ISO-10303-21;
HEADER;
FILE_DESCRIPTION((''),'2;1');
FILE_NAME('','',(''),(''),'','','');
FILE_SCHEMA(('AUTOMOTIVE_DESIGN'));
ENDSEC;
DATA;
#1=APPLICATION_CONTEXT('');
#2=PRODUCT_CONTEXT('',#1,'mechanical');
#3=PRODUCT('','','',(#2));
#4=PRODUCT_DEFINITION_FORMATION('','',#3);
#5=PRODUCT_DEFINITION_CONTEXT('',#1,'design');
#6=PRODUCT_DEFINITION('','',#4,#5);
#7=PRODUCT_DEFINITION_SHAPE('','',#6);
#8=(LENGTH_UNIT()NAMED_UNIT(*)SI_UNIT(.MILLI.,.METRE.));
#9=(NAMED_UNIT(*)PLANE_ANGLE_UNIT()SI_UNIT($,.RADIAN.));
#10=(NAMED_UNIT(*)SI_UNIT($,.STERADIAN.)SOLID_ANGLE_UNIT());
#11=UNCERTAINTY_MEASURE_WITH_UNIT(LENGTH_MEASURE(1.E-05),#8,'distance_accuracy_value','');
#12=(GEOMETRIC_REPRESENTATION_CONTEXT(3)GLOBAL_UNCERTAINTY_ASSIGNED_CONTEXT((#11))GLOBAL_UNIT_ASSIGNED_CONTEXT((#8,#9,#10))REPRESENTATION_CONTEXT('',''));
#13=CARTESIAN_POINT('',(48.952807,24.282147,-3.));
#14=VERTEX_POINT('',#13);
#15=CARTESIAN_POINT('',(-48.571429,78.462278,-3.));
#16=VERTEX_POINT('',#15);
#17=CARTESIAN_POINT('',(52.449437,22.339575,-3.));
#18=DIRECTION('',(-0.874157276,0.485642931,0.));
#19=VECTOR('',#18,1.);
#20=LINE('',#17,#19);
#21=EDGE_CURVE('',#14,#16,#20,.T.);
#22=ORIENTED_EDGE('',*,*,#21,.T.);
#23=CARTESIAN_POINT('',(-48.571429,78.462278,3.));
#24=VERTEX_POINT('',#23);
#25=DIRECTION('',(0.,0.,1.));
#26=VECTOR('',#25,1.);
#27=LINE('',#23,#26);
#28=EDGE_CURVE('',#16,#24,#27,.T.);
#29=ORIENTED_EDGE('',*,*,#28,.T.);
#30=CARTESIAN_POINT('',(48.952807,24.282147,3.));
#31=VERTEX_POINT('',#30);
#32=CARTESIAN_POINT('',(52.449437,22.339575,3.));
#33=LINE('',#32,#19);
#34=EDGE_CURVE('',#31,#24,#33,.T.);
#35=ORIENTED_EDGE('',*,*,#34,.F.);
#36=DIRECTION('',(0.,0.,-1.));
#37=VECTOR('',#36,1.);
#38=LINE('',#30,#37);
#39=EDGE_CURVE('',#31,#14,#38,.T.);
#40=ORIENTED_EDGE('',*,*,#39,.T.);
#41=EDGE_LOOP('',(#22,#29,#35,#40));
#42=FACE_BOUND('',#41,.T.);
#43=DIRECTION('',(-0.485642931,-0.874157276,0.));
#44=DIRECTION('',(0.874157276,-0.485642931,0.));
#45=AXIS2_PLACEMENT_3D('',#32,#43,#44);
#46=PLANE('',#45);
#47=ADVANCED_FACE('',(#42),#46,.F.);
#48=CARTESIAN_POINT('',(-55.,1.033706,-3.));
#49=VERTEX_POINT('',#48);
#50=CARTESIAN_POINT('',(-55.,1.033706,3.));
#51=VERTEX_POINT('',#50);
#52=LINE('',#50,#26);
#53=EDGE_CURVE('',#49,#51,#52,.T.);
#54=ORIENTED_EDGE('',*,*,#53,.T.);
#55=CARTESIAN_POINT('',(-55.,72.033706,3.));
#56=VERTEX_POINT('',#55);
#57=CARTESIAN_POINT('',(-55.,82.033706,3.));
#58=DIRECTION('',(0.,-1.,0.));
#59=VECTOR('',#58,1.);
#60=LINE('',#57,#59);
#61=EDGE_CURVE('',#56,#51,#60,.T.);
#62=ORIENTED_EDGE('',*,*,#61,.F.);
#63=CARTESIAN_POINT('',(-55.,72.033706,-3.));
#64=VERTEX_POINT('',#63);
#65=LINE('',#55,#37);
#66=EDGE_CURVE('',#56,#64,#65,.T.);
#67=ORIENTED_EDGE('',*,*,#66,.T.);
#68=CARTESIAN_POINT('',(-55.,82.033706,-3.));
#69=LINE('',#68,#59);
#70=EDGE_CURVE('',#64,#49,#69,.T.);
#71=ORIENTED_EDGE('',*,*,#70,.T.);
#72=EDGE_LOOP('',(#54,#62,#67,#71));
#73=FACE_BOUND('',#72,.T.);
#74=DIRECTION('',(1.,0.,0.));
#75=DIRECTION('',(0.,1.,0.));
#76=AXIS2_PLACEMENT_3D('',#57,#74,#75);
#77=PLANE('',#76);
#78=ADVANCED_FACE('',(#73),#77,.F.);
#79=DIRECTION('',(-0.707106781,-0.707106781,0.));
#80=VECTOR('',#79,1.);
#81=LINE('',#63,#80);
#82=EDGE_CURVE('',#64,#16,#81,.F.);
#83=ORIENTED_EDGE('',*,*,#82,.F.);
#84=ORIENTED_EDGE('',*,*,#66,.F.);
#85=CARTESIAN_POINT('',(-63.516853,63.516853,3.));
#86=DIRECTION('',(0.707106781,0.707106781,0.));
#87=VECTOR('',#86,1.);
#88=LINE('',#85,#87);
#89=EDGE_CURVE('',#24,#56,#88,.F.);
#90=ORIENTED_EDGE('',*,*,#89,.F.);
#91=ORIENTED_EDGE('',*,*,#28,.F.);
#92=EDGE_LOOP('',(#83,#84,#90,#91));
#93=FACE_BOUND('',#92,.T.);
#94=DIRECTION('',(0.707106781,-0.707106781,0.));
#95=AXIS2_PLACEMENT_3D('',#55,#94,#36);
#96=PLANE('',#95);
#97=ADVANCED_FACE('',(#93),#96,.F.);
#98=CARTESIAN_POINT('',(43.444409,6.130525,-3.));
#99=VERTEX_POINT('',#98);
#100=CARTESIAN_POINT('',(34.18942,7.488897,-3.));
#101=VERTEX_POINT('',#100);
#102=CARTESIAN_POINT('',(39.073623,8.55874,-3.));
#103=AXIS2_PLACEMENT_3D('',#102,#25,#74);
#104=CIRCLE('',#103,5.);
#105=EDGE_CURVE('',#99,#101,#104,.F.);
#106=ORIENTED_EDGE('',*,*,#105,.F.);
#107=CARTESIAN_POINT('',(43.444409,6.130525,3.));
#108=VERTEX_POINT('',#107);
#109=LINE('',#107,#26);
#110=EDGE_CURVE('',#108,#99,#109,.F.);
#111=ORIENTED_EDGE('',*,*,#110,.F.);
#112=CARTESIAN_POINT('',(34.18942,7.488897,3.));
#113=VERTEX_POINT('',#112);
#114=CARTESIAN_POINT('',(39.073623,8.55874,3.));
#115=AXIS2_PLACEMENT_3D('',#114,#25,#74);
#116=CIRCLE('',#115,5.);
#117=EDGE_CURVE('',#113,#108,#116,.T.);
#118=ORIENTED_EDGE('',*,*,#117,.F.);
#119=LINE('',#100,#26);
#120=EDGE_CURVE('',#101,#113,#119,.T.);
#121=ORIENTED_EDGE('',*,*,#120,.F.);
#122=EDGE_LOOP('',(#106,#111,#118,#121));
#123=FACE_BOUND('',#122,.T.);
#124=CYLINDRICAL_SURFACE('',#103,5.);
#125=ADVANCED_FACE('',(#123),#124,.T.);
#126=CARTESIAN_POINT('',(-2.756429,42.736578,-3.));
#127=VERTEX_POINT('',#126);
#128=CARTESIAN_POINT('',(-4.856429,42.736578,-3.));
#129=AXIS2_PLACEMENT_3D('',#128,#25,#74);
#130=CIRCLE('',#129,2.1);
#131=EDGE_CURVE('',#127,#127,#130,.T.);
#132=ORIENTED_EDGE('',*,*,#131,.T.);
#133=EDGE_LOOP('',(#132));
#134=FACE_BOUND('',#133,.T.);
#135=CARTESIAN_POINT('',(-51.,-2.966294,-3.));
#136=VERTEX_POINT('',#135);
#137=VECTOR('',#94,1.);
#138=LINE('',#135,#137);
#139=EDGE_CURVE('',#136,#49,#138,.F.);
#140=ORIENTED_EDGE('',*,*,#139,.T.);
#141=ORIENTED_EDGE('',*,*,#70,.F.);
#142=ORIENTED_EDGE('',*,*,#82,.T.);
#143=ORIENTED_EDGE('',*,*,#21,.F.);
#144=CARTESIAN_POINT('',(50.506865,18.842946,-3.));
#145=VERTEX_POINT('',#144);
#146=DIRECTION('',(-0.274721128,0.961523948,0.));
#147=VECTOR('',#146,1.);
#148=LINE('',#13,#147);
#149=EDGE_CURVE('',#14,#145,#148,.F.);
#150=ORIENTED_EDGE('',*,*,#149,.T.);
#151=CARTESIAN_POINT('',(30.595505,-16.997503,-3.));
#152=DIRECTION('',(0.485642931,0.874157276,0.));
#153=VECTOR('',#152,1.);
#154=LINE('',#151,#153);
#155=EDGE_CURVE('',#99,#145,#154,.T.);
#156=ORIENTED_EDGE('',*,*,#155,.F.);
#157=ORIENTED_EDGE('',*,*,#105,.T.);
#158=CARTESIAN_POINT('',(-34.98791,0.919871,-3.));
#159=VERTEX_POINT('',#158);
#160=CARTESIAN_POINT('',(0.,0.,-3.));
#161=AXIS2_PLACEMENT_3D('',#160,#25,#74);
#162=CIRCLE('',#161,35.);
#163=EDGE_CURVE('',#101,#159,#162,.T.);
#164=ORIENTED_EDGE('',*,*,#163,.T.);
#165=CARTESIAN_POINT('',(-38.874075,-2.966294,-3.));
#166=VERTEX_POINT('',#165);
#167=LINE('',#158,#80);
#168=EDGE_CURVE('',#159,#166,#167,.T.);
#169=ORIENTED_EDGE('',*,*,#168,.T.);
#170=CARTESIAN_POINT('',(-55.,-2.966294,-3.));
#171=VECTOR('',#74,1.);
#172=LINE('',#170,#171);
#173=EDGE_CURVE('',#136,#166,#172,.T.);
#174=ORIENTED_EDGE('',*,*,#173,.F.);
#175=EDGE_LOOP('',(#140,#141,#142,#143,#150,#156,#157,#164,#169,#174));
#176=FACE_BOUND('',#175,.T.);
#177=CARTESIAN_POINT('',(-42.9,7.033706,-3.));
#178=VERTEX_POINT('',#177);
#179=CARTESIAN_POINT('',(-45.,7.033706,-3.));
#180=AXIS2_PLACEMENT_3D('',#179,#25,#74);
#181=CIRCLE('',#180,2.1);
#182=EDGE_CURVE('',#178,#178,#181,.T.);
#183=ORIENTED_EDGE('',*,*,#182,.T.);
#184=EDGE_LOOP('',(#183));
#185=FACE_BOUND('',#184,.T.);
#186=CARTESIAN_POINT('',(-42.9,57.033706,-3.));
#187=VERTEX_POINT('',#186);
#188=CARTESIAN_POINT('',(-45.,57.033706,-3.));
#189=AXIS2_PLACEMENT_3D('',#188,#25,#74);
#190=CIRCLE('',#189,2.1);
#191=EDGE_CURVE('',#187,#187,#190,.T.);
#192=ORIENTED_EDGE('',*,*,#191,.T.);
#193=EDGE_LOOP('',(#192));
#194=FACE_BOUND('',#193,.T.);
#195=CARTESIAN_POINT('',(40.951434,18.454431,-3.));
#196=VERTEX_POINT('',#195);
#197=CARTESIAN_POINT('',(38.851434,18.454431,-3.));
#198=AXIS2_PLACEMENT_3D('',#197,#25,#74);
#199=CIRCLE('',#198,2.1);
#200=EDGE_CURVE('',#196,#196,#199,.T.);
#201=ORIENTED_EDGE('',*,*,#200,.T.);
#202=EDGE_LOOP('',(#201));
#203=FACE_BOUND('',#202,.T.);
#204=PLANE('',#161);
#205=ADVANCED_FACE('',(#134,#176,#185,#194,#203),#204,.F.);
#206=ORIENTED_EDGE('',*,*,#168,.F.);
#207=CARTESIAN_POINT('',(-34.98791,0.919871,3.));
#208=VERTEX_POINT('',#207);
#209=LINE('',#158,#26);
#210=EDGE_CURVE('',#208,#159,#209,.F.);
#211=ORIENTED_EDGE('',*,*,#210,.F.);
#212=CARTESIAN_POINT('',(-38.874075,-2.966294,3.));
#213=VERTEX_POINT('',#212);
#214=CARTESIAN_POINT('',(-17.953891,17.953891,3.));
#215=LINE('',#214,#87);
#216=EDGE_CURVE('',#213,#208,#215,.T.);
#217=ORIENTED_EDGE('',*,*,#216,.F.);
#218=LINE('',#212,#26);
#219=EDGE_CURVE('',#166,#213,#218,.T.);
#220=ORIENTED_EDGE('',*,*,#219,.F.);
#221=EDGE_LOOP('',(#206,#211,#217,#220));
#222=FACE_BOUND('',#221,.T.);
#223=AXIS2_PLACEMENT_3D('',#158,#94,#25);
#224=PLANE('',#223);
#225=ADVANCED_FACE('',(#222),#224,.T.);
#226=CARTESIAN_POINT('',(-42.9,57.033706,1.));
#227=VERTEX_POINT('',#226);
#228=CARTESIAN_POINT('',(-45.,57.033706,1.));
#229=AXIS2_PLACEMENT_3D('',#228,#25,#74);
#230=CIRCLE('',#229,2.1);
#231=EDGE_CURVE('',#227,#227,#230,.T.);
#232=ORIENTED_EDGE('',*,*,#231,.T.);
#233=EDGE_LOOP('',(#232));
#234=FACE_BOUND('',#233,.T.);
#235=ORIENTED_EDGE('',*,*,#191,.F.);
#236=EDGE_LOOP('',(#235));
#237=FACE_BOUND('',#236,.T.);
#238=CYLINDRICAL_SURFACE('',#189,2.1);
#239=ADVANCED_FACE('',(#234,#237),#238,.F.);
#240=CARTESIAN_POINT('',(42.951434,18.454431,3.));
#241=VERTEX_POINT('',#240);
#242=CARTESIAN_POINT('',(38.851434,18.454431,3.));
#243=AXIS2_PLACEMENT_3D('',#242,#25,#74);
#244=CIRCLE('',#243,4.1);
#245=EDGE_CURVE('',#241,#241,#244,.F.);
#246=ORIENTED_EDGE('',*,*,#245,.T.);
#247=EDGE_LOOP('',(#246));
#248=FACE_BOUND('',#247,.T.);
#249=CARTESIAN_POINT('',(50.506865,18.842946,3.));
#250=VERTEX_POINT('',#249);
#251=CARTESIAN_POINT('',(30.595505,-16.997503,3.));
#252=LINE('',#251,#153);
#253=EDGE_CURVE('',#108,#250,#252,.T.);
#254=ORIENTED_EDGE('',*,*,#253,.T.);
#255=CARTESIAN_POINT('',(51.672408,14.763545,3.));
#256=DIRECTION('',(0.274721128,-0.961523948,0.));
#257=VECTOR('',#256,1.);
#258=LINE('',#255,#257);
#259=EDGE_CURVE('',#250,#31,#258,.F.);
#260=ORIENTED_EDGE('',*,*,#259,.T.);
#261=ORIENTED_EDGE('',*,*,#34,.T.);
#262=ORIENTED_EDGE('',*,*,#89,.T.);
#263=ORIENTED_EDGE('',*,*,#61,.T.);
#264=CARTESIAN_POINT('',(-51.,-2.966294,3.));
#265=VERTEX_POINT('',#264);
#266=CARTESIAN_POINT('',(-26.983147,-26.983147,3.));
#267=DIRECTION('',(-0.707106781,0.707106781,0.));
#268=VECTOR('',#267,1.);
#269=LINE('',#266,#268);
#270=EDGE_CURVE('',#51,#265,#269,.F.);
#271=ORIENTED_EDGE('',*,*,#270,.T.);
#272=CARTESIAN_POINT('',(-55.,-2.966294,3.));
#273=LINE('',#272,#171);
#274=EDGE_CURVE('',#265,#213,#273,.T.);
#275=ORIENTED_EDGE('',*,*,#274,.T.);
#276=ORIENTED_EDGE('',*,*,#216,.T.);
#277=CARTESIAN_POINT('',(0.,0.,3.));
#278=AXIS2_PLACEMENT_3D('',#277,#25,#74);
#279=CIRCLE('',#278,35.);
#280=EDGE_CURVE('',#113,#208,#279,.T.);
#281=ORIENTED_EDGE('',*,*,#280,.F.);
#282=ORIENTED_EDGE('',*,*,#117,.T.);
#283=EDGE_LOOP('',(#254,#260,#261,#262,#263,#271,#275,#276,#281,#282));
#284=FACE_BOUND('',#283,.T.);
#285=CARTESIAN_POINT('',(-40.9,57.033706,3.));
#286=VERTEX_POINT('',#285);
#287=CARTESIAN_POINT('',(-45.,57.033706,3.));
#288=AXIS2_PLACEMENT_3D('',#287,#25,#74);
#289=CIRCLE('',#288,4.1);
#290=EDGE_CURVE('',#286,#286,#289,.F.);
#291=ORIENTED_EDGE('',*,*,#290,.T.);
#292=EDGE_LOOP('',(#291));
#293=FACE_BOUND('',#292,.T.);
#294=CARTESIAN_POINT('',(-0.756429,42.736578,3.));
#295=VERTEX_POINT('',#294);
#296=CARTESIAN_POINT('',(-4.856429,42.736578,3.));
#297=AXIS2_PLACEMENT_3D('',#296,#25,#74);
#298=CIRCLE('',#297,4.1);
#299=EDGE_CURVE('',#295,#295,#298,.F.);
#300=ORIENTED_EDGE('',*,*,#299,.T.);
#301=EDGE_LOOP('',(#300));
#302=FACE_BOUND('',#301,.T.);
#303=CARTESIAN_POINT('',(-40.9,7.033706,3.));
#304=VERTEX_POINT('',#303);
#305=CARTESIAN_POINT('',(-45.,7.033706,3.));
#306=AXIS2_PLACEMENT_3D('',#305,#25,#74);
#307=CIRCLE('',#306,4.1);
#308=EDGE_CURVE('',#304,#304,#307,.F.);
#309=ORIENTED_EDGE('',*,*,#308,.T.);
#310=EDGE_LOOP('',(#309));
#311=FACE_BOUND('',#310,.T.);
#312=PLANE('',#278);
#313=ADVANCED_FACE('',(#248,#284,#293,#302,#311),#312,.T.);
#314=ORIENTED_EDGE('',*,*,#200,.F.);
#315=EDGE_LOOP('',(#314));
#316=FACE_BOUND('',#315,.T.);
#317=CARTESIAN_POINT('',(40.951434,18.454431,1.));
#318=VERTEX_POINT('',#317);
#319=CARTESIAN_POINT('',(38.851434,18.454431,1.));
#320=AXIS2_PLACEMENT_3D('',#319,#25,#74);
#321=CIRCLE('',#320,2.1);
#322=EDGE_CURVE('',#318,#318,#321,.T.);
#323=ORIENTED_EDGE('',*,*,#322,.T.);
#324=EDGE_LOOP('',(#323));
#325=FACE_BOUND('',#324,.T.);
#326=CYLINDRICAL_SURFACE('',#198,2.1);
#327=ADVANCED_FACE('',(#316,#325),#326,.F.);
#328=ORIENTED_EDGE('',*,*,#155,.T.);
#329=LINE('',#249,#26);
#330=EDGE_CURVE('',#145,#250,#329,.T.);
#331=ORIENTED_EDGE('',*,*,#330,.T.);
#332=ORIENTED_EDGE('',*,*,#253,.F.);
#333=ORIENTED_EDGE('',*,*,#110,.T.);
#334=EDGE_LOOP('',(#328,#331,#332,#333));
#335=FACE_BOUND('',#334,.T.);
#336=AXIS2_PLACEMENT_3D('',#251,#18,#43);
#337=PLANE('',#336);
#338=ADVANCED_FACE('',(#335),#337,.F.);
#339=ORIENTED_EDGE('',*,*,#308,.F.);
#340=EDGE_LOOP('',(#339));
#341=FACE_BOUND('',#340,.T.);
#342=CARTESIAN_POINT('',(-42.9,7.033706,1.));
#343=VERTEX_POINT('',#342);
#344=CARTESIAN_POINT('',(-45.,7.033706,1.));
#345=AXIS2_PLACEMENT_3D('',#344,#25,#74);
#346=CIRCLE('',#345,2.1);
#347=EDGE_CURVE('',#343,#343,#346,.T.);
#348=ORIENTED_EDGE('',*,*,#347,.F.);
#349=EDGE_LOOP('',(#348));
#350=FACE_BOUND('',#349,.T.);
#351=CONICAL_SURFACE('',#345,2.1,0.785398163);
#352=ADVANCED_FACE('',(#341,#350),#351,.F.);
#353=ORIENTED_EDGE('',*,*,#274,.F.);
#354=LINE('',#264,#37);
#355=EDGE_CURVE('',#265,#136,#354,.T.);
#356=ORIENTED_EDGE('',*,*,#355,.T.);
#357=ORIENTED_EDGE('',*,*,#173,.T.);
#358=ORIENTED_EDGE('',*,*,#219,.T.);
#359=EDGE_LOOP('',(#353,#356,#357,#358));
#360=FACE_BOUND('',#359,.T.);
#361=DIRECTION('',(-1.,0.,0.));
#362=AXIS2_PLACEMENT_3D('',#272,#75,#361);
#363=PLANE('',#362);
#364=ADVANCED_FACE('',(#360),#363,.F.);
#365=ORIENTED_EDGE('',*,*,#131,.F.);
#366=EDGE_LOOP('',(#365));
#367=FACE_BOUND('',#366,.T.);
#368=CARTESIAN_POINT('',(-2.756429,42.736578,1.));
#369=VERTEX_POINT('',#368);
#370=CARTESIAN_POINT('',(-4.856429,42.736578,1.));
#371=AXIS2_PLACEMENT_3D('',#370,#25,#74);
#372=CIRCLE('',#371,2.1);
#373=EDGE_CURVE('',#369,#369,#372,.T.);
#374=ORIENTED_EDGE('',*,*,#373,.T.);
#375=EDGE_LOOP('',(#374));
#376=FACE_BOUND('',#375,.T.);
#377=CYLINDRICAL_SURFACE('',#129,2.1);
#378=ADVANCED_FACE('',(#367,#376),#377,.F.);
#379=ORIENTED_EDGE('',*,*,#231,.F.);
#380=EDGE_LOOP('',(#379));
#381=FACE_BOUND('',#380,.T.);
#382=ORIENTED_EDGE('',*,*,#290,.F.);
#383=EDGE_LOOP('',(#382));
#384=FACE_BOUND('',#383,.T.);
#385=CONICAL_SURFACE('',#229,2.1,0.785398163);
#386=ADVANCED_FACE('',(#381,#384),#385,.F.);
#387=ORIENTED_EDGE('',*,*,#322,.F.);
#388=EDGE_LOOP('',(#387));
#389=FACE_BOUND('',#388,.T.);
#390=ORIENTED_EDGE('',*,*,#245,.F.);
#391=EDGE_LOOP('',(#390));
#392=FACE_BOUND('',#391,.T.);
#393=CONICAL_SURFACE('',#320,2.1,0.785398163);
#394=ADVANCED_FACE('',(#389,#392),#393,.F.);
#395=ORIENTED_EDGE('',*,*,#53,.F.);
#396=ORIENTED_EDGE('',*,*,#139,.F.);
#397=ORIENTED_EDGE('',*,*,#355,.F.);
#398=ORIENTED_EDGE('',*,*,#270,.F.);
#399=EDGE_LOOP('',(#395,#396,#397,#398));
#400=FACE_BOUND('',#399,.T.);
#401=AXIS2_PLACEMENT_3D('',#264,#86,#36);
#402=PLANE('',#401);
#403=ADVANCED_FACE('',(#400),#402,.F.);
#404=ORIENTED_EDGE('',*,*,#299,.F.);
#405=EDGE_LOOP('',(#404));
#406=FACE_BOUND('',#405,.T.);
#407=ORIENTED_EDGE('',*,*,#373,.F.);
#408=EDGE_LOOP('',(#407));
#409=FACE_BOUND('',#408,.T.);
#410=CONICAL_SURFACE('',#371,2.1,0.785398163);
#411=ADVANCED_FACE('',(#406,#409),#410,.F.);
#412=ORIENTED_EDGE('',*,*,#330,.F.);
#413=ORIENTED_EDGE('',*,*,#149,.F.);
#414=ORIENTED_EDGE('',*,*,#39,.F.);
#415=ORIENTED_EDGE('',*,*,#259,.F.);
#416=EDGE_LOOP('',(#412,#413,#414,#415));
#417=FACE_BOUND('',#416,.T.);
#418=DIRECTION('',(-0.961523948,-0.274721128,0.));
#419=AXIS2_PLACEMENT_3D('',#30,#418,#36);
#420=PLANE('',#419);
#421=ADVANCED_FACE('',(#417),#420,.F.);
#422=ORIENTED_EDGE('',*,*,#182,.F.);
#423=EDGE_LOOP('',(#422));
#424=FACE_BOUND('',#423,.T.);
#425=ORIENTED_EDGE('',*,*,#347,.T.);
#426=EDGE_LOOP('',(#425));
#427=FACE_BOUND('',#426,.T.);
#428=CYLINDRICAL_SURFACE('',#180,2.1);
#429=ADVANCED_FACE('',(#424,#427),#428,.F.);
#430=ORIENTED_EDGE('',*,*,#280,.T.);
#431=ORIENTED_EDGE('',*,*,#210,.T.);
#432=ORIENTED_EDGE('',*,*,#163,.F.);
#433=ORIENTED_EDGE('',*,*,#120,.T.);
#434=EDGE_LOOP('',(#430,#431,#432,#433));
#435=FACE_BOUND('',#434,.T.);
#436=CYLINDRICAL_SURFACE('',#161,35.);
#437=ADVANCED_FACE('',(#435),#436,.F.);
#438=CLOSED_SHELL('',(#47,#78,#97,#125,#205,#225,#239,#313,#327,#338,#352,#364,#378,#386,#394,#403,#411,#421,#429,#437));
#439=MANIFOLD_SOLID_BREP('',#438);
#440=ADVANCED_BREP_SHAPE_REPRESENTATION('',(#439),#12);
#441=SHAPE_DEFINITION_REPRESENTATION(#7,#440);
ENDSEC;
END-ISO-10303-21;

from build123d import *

# Parameters (mm, degrees)
SKETCH_1_R          = 2.1
SKETCH_1_R_2        = 4
SKETCH_1_R_3        = 11
EXTRUDE_1_DEPTH     = 3
SKETCH_3_R          = 2.1
CUT_EXTRUDE_1_DEPTH = 99.947101842
CHAMFER_2_SIZE      = 4
CHAMFER_3_SIZE      = 10
CHAMFER_3_SIZE2     = 7.354021529
SKETCH_4_W          = 7.6
SKETCH_4_H          = 9.2
CUT_EXTRUDE_2_DEPTH = 97.00692173
FILLET_1_R          = 2
SKETCH_5_R          = 2.1
CUT_EXTRUDE_3_DEPTH = 97.00692173
CHAMFER_1_SIZE      = 2
SKETCH_6_R          = 35
CUT_EXTRUDE_4_DEPTH = 97.00692173
FILLET_START        = -3
FILLET_2_DEPTH      = 6
CHAMFER_4_SIZE      = 4


with BuildPart() as part:
    # 草图1 → 凸台-拉伸1 (new, symmetric)
    with BuildSketch(Plane.XY):
        with BuildLine():
            Line((-55, 82.03370626), (-55, -2.96629374))
            Line((-55, -2.96629374), (-34.874074919, -2.96629374))
            ThreePointArc((-34.874074919, -2.96629374), (-7.334524273, -34.22286887), (30.595504664, -16.997502591))
            Line((30.595504664, -16.997502591), (52.449436567, 22.339574834))
            Line((52.449436567, 22.339574834), (-55, 82.03370626))
        make_face()
        with Locations((29, 0)):
            Circle(SKETCH_1_R, mode=Mode.SUBTRACT)
        with Locations((-14.5, -25.11473671)):
            Circle(SKETCH_1_R, mode=Mode.SUBTRACT)
        with Locations((-14.5, 25.11473671)):
            Circle(SKETCH_1_R, mode=Mode.SUBTRACT)
        with Locations((-9.625, 16.670989023)):
            Circle(SKETCH_1_R_2, mode=Mode.SUBTRACT)
        Circle(SKETCH_1_R_3, mode=Mode.SUBTRACT)
    extrude(amount=EXTRUDE_1_DEPTH, both=True)

    # 草图3 → 切除-拉伸1 (cut, through all)
    with BuildSketch(Plane.XY.offset(3)):
        with Locations((-45, 7.03370626)):
            Circle(SKETCH_3_R)
        with Locations((-45, 57.03370626)):
            Circle(SKETCH_3_R)
    extrude(amount=-CUT_EXTRUDE_1_DEPTH, mode=Mode.SUBTRACT)

    # 倒角2
    chamfer_2_edges = [part.edges().sort_by_distance(p)[0] for p in [
        (52.449436567, 22.339574834, 0),
        (-55, -2.96629374, 0),
    ]]
    chamfer(chamfer_2_edges, length=CHAMFER_2_SIZE)

    # 倒角3
    chamfer_3_edges = [part.edges().sort_by_distance(p)[0] for p in [
        (-55, 82.03370626, 0),
    ]]
    chamfer_3_side = [part.faces().sort_by_distance(p)[0] for p in [
        (-55, 41.53370626, 0),
    ]]
    chamfer(chamfer_3_edges, length=CHAMFER_3_SIZE, length2=CHAMFER_3_SIZE2, reference=chamfer_3_side[0])

    # 草图4 → 切除-拉伸2 (cut, through all)
    with BuildSketch(Plane.XY.offset(3)):
        with Locations((-18.5, 0)):
            Rectangle(SKETCH_4_W, SKETCH_4_H)
    extrude(amount=-CUT_EXTRUDE_2_DEPTH, mode=Mode.SUBTRACT)

    # 圆角1
    fillet_1_edges = [part.edges().sort_by_distance(p)[0] for p in [
        (-14.7, 4.6, 0),
        (-14.7, -4.6, 0),
        (-22.3, -4.6, 0),
        (-22.3, 4.6, 0),
    ]]
    fillet(fillet_1_edges, radius=FILLET_1_R)

    # 草图5 → 切除-拉伸3 (cut, through all)
    with BuildSketch(Plane.XY.offset(3)):
        with Locations((-4.856429312, 42.736577944)):
            Circle(SKETCH_5_R)
        with Locations((38.851434494, 18.454431385)):
            Circle(SKETCH_5_R)
    extrude(amount=-CUT_EXTRUDE_3_DEPTH, mode=Mode.SUBTRACT)

    # 倒角1
    chamfer_1_edges = [part.edges().sort_by_distance(p)[0] for p in [
        (-6.956429312, 42.736577944, 3),
        (36.751434494, 18.454431385, 3),
        (26.9, 0, 3),
        (-47.1, 7.03370626, 3),
        (-47.1, 57.03370626, 3),
    ]]
    chamfer(chamfer_1_edges, length=CHAMFER_1_SIZE)

    # 草图6 → 切除-拉伸4 (cut, through all)
    with BuildSketch(Plane.XY.offset(3)):
        Circle(SKETCH_6_R)
    extrude(amount=-CUT_EXTRUDE_4_DEPTH, mode=Mode.SUBTRACT)

    # 圆角2: read off the stored shape, not the designer's step
    # 圆角2 outline → 圆角2 (cut)
    with BuildSketch(Plane.XY.offset(FILLET_START)):
        with BuildLine():
            ThreePointArc((43.444408883, 6.130525003), (38.347542021, 3.611739847), (34.18941969, 7.488897201))
            ThreePointArc((34.18941969, 7.488897201), (34.62899868, -5.082563371), (30.595504664, -16.997502591))
            Line((30.595504664, -16.997502591), (43.444408883, 6.130525003))
        make_face()
    extrude(amount=FILLET_2_DEPTH, mode=Mode.SUBTRACT)

    # 倒角4
    # the kernel refuses this chamfer: 4, 3.699752538 mm, written as the material it takes off along each edge
    with BuildSketch(Plane(origin=(-34.874074919, -2.96629374, 13.286731952), x_dir=(-0.029279801283292956, 0.9995712547071425, 0), z_dir=(0, 0, -1))) as chamfer_4_piece_1:
        with BuildLine():
            Line((3.887831943, 0), (CHAMFER_4_SIZE * 0.0292798012833, -CHAMFER_4_SIZE * 0.999571254707))
            Line((CHAMFER_4_SIZE * 0.0292798012833, -CHAMFER_4_SIZE * 0.999571254707), (0, 0))
            ThreePointArc((0, 0), (1.998980438, -0.05398137), (3.887831943, 0))
        make_face()
    extrude(amount=26.573463904, mode=Mode.SUBTRACT)


solid = part.part
